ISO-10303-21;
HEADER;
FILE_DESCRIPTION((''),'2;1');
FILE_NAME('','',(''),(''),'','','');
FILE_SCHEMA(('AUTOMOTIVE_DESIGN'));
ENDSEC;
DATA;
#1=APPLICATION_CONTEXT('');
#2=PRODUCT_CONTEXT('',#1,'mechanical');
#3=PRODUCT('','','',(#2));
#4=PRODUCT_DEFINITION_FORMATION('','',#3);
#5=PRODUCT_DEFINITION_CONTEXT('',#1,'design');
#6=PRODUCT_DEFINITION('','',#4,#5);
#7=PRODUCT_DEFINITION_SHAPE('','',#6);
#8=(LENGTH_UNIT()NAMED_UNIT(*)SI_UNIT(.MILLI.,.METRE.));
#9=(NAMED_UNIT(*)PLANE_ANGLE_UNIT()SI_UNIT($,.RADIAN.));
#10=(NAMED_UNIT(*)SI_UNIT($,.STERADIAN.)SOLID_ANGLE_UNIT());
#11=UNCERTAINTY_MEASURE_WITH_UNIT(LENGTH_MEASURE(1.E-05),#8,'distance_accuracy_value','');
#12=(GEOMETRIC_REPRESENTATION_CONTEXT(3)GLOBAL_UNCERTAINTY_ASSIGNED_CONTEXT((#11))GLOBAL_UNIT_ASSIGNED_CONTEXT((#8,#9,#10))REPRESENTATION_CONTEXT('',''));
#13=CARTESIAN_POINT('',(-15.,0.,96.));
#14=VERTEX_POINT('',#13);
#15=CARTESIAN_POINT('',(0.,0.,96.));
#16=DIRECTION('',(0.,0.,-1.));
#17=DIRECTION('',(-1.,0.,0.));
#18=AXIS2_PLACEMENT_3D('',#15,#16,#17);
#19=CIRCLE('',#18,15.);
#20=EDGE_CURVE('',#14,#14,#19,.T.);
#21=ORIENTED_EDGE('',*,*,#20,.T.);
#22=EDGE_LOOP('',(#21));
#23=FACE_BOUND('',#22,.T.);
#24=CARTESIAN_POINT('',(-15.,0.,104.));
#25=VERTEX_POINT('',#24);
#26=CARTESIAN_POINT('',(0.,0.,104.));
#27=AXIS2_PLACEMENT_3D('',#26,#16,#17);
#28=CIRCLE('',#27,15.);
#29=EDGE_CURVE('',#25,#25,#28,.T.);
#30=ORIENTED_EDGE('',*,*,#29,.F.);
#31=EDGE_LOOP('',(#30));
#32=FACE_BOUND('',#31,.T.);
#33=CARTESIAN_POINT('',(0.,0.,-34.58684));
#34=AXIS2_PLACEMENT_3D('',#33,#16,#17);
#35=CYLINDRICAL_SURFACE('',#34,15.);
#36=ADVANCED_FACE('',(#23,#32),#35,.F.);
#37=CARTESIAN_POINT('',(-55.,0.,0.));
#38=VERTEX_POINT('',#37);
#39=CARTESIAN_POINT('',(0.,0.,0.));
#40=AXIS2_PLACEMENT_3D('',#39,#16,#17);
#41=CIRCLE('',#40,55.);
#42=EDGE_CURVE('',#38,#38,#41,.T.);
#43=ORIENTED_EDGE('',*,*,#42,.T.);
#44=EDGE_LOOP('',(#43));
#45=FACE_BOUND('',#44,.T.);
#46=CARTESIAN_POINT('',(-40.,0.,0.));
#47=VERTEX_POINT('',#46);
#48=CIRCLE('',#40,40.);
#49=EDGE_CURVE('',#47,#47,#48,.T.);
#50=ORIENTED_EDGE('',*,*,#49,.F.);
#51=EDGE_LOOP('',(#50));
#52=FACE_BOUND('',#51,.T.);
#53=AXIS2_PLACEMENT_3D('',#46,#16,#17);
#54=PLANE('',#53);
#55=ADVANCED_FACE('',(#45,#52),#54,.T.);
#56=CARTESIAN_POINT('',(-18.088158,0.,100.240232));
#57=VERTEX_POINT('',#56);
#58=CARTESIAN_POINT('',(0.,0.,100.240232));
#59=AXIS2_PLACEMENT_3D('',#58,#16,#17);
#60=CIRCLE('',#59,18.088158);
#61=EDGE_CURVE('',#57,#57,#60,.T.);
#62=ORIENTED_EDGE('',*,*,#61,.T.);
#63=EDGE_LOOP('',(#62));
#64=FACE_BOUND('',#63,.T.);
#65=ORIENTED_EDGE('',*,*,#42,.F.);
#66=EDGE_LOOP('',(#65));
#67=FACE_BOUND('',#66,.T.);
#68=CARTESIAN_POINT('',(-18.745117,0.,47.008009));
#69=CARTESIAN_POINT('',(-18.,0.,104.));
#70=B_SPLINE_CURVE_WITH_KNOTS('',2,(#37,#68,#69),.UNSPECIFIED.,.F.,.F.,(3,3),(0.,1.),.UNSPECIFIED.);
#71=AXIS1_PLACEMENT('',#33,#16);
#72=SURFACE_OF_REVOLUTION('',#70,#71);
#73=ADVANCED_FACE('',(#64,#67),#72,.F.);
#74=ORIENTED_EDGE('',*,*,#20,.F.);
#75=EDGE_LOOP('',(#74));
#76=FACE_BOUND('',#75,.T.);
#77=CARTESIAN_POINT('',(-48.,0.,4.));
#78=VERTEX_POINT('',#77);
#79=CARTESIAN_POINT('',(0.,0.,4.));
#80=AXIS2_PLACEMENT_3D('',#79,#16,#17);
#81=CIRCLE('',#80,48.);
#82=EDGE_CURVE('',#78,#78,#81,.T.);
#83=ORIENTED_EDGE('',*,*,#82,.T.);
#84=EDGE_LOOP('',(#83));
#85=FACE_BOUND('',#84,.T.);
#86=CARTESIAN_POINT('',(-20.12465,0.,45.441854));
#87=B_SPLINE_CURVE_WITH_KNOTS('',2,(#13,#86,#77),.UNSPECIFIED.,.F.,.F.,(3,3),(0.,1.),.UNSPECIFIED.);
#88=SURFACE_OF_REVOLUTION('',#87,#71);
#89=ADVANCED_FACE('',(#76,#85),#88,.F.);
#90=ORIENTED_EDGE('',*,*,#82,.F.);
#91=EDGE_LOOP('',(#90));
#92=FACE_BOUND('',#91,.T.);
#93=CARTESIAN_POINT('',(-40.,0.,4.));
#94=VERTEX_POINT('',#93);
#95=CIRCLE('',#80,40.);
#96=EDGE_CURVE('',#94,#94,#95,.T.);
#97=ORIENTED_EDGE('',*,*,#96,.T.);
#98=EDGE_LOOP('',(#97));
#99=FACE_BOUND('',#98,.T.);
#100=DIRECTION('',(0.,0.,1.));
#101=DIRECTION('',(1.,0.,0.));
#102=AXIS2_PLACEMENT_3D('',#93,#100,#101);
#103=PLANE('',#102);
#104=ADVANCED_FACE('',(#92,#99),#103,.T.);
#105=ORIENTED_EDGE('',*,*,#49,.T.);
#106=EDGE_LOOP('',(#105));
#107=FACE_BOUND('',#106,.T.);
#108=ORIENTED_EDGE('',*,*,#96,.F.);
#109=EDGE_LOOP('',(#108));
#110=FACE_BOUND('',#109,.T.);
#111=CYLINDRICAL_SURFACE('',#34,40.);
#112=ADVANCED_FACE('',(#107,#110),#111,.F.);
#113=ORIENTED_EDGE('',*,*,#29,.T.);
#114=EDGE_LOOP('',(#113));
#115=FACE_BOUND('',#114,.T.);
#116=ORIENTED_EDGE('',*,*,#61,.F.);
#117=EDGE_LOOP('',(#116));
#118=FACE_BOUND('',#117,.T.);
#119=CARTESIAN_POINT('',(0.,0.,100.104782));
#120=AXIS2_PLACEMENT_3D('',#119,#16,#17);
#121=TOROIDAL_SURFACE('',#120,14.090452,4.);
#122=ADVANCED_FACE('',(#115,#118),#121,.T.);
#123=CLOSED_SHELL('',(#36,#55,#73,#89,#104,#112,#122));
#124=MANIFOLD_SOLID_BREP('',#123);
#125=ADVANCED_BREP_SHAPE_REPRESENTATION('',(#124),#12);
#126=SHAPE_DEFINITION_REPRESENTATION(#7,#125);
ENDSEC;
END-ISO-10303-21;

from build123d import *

# Parameters (mm, degrees)
FILLET5_R = 4


with BuildPart() as part:
    # Sketch1 → Revolve2 (revolve)
    with BuildSketch(Plane(origin=(0, 0, 0), x_dir=(1, 0, 0), z_dir=(0, 1, 0))):
        with BuildLine():
            Line((-40, 0), (-55, 0))
            add(Edge.make_bspline(
                [(-55, 0), (-18.745116659, -47.008008668), (-18, -104)],
                knots=[0, 0, 0, 1, 1, 1], degree=2))
            Line((-18, -104), (-15, -104))
            Line((-15, -104), (-15, -96))
            add(Edge.make_bspline(
                [(-48, -4), (-20.124649885, -45.441854427), (-15, -96)],
                knots=[0, 0, 0, 1, 1, 1], degree=2))
            Line((-48, -4), (-40, -4))
            Line((-40, -4), (-40, 0))
        make_face()
    revolve(axis=Axis((0, 0, -34.586839539), (0, 0, 1)))

    # Fillet5
    # the kernel refuses this fillet: 4 mm, written as the material it takes off along each edge
    with BuildSketch(Plane(origin=(0, 0, 104), x_dir=(-1, 0, 0), z_dir=(0, 1, 0))) as fillet5_piece_1:
        with BuildLine():
            CenterArc((14.090452263, -3.895217955), FILLET5_R, 1.940553097, 74.91616861)
            Line((15, 0), (15.018190955, 0.077904359))
            ThreePointArc((15.018190955, 0.077904359), (16.5, 0.08), (18, 0.08))
            Line((18, 0.08), (18.079993164, 0.001045835))
            ThreePointArc((18.079993164, 0.001045835), (18.114283516, -1.87823868), (18.168112379, -3.757058686))
            Line((18.168112379, -3.757058686), (18.088158259, -3.759767691))
        make_face()
    revolve(axis=Axis((0, 0, 104), (0, 0, 1)), mode=Mode.SUBTRACT)


solid = part.part
